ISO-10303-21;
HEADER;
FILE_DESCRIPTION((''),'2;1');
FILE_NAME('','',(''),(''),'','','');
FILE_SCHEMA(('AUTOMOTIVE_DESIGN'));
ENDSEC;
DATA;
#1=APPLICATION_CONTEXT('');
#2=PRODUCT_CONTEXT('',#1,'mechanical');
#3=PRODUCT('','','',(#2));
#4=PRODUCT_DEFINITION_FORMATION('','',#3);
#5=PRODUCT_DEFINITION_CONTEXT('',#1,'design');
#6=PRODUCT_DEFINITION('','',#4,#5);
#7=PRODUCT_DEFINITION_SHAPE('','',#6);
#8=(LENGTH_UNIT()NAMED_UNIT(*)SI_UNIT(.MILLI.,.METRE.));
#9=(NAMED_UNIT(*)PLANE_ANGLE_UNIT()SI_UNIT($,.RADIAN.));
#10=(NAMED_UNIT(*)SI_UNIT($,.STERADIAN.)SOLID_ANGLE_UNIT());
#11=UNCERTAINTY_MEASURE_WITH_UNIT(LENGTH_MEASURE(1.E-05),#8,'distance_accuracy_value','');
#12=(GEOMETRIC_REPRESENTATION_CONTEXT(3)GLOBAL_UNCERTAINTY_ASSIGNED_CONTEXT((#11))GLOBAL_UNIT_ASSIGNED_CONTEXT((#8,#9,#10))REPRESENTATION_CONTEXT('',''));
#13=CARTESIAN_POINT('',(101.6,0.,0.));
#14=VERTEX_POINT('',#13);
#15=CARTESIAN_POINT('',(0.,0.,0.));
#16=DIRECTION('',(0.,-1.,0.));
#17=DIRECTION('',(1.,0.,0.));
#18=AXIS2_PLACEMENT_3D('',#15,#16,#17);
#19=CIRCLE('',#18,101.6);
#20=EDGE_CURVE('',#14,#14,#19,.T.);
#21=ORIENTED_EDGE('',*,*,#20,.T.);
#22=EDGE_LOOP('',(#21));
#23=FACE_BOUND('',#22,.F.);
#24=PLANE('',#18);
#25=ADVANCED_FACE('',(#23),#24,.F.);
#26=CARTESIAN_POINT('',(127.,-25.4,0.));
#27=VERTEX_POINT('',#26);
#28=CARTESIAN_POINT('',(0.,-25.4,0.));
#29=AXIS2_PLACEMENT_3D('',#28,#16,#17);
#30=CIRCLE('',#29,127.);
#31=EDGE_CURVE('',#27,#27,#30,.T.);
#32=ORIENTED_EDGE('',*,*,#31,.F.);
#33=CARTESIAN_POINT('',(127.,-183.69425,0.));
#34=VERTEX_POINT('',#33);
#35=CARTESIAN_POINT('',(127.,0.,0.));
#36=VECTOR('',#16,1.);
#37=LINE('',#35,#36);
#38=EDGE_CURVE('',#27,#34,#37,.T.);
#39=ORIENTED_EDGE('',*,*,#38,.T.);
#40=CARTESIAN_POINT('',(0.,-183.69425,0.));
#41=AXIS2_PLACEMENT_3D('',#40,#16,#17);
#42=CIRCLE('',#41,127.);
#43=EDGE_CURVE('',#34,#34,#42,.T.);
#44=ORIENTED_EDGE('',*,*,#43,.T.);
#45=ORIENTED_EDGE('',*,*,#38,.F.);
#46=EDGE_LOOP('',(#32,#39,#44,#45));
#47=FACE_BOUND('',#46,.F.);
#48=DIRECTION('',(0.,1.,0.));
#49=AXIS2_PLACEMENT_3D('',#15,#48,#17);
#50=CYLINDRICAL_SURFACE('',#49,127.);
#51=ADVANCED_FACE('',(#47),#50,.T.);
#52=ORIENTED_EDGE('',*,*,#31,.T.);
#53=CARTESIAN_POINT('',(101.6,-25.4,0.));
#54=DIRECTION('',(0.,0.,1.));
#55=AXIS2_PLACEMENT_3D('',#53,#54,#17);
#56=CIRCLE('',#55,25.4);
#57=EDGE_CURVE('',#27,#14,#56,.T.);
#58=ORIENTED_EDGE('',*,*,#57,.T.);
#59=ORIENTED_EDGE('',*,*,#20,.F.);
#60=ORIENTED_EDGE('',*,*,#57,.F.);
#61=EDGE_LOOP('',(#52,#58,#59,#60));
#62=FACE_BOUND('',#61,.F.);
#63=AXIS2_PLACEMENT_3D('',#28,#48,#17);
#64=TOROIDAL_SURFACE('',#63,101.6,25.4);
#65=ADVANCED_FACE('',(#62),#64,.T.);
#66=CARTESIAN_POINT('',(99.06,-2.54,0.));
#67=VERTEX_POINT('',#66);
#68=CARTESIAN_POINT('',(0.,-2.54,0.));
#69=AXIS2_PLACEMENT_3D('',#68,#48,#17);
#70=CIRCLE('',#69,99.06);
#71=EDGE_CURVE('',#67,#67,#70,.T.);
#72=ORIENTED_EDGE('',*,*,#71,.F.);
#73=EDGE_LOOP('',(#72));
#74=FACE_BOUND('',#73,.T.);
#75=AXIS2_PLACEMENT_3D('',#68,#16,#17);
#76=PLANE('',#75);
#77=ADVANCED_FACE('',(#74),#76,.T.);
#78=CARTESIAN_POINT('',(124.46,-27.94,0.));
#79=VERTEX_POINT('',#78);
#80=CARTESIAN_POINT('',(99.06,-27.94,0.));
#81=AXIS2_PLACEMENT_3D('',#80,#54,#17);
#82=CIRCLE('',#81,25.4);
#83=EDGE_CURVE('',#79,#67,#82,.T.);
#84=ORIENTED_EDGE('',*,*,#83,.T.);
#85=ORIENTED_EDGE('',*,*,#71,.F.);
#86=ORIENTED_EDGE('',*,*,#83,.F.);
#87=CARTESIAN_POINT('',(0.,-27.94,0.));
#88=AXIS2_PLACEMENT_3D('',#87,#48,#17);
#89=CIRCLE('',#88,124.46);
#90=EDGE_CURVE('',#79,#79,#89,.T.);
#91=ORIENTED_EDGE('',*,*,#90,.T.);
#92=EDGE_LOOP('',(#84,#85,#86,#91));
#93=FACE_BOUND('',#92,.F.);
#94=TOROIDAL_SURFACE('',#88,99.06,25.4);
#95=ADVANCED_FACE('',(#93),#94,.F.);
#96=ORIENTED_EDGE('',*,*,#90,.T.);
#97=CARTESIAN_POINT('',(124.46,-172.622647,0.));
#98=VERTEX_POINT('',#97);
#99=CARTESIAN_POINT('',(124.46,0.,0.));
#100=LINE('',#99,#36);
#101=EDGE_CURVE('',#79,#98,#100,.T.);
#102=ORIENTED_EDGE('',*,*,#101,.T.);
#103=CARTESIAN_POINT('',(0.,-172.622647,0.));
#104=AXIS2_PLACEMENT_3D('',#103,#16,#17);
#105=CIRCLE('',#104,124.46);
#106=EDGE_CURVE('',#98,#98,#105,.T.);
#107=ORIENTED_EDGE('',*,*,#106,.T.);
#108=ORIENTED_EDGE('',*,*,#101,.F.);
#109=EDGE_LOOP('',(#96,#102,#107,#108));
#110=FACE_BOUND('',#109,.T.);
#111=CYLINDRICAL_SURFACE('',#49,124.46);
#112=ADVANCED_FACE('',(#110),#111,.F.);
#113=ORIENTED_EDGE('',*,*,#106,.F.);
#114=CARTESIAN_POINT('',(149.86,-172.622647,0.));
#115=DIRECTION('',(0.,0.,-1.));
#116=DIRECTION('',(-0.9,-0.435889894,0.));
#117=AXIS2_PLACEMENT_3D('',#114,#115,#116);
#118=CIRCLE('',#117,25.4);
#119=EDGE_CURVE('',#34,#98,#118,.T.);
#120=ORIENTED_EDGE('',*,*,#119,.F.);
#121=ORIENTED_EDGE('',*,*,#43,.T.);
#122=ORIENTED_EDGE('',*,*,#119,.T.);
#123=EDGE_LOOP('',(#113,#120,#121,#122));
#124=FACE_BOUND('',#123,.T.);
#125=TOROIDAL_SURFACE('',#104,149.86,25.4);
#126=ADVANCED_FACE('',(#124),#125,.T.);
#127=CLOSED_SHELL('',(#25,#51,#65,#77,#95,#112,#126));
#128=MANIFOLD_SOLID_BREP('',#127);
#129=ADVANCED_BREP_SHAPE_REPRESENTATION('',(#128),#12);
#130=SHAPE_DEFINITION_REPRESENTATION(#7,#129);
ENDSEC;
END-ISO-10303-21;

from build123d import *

# Parameters (mm, degrees)
F0_R     = 127
F1_DEPTH = 183.69425
F2_T     = -2.54


# Not quite as in the source:
# - a fillet or chamfer that OpenCascade refuses, or shapes differently, is made with other operations: its cross-section is extruded or revolved along the edge and cut away or added


with BuildPart() as f1:
    # F0 (on Front) → F1 (new body)
    with BuildSketch(Plane.XZ):
        Circle(F0_R)
    extrude(amount=F1_DEPTH)

    # F2
    f2_openings = [f1.faces().sort_by_distance(p)[0] for p in [
        (0, -183.69425, 0),
    ]]
    offset(amount=F2_T, openings=f2_openings)

    # F3: fillet of radius 25.4 on 3 edges, made by hand

    # F3_s1 → F3_t2 (revolve)
    with BuildSketch(Plane.XY):
        with BuildLine():
            ThreePointArc((124.46, -27.94), (117.0205122421, -9.9794877579), (99.06, -2.54))
            Line((99.06, -2.54), (124.46, -2.54))
            Line((124.46, -2.54), (124.46, -27.94))
        make_face()
    revolve(axis=Axis((0, -2.54, 0), (0, 1, 0)))

    # F3_s3 → F3_t4 (revolve, cut)
    with BuildSketch(Plane.XY):
        with BuildLine():
            ThreePointArc((127, -25.4), (119.5605122421, -7.4394877579), (101.6, 0))
            Line((101.6, 0), (127, 0))
            Line((127, 0), (127, -25.4))
        make_face()
    revolve(axis=Axis((0, 0, 0), (0, -1, 0)), mode=Mode.SUBTRACT)

    # F3_s5 → F3_t6 (revolve, cut)
    with BuildSketch(Plane.XY):
        with BuildLine():
            ThreePointArc((127, -183.69425), (125.1031423642, -178.3022593463), (124.46, -172.6226466834))
            Line((124.46, -172.6226466834), (124.46, -183.69425))
            Line((124.46, -183.69425), (127, -183.69425))
        make_face()
    revolve(axis=Axis((0, -183.69425, 0), (0, -1, 0)), mode=Mode.SUBTRACT)


solid = f1.part
